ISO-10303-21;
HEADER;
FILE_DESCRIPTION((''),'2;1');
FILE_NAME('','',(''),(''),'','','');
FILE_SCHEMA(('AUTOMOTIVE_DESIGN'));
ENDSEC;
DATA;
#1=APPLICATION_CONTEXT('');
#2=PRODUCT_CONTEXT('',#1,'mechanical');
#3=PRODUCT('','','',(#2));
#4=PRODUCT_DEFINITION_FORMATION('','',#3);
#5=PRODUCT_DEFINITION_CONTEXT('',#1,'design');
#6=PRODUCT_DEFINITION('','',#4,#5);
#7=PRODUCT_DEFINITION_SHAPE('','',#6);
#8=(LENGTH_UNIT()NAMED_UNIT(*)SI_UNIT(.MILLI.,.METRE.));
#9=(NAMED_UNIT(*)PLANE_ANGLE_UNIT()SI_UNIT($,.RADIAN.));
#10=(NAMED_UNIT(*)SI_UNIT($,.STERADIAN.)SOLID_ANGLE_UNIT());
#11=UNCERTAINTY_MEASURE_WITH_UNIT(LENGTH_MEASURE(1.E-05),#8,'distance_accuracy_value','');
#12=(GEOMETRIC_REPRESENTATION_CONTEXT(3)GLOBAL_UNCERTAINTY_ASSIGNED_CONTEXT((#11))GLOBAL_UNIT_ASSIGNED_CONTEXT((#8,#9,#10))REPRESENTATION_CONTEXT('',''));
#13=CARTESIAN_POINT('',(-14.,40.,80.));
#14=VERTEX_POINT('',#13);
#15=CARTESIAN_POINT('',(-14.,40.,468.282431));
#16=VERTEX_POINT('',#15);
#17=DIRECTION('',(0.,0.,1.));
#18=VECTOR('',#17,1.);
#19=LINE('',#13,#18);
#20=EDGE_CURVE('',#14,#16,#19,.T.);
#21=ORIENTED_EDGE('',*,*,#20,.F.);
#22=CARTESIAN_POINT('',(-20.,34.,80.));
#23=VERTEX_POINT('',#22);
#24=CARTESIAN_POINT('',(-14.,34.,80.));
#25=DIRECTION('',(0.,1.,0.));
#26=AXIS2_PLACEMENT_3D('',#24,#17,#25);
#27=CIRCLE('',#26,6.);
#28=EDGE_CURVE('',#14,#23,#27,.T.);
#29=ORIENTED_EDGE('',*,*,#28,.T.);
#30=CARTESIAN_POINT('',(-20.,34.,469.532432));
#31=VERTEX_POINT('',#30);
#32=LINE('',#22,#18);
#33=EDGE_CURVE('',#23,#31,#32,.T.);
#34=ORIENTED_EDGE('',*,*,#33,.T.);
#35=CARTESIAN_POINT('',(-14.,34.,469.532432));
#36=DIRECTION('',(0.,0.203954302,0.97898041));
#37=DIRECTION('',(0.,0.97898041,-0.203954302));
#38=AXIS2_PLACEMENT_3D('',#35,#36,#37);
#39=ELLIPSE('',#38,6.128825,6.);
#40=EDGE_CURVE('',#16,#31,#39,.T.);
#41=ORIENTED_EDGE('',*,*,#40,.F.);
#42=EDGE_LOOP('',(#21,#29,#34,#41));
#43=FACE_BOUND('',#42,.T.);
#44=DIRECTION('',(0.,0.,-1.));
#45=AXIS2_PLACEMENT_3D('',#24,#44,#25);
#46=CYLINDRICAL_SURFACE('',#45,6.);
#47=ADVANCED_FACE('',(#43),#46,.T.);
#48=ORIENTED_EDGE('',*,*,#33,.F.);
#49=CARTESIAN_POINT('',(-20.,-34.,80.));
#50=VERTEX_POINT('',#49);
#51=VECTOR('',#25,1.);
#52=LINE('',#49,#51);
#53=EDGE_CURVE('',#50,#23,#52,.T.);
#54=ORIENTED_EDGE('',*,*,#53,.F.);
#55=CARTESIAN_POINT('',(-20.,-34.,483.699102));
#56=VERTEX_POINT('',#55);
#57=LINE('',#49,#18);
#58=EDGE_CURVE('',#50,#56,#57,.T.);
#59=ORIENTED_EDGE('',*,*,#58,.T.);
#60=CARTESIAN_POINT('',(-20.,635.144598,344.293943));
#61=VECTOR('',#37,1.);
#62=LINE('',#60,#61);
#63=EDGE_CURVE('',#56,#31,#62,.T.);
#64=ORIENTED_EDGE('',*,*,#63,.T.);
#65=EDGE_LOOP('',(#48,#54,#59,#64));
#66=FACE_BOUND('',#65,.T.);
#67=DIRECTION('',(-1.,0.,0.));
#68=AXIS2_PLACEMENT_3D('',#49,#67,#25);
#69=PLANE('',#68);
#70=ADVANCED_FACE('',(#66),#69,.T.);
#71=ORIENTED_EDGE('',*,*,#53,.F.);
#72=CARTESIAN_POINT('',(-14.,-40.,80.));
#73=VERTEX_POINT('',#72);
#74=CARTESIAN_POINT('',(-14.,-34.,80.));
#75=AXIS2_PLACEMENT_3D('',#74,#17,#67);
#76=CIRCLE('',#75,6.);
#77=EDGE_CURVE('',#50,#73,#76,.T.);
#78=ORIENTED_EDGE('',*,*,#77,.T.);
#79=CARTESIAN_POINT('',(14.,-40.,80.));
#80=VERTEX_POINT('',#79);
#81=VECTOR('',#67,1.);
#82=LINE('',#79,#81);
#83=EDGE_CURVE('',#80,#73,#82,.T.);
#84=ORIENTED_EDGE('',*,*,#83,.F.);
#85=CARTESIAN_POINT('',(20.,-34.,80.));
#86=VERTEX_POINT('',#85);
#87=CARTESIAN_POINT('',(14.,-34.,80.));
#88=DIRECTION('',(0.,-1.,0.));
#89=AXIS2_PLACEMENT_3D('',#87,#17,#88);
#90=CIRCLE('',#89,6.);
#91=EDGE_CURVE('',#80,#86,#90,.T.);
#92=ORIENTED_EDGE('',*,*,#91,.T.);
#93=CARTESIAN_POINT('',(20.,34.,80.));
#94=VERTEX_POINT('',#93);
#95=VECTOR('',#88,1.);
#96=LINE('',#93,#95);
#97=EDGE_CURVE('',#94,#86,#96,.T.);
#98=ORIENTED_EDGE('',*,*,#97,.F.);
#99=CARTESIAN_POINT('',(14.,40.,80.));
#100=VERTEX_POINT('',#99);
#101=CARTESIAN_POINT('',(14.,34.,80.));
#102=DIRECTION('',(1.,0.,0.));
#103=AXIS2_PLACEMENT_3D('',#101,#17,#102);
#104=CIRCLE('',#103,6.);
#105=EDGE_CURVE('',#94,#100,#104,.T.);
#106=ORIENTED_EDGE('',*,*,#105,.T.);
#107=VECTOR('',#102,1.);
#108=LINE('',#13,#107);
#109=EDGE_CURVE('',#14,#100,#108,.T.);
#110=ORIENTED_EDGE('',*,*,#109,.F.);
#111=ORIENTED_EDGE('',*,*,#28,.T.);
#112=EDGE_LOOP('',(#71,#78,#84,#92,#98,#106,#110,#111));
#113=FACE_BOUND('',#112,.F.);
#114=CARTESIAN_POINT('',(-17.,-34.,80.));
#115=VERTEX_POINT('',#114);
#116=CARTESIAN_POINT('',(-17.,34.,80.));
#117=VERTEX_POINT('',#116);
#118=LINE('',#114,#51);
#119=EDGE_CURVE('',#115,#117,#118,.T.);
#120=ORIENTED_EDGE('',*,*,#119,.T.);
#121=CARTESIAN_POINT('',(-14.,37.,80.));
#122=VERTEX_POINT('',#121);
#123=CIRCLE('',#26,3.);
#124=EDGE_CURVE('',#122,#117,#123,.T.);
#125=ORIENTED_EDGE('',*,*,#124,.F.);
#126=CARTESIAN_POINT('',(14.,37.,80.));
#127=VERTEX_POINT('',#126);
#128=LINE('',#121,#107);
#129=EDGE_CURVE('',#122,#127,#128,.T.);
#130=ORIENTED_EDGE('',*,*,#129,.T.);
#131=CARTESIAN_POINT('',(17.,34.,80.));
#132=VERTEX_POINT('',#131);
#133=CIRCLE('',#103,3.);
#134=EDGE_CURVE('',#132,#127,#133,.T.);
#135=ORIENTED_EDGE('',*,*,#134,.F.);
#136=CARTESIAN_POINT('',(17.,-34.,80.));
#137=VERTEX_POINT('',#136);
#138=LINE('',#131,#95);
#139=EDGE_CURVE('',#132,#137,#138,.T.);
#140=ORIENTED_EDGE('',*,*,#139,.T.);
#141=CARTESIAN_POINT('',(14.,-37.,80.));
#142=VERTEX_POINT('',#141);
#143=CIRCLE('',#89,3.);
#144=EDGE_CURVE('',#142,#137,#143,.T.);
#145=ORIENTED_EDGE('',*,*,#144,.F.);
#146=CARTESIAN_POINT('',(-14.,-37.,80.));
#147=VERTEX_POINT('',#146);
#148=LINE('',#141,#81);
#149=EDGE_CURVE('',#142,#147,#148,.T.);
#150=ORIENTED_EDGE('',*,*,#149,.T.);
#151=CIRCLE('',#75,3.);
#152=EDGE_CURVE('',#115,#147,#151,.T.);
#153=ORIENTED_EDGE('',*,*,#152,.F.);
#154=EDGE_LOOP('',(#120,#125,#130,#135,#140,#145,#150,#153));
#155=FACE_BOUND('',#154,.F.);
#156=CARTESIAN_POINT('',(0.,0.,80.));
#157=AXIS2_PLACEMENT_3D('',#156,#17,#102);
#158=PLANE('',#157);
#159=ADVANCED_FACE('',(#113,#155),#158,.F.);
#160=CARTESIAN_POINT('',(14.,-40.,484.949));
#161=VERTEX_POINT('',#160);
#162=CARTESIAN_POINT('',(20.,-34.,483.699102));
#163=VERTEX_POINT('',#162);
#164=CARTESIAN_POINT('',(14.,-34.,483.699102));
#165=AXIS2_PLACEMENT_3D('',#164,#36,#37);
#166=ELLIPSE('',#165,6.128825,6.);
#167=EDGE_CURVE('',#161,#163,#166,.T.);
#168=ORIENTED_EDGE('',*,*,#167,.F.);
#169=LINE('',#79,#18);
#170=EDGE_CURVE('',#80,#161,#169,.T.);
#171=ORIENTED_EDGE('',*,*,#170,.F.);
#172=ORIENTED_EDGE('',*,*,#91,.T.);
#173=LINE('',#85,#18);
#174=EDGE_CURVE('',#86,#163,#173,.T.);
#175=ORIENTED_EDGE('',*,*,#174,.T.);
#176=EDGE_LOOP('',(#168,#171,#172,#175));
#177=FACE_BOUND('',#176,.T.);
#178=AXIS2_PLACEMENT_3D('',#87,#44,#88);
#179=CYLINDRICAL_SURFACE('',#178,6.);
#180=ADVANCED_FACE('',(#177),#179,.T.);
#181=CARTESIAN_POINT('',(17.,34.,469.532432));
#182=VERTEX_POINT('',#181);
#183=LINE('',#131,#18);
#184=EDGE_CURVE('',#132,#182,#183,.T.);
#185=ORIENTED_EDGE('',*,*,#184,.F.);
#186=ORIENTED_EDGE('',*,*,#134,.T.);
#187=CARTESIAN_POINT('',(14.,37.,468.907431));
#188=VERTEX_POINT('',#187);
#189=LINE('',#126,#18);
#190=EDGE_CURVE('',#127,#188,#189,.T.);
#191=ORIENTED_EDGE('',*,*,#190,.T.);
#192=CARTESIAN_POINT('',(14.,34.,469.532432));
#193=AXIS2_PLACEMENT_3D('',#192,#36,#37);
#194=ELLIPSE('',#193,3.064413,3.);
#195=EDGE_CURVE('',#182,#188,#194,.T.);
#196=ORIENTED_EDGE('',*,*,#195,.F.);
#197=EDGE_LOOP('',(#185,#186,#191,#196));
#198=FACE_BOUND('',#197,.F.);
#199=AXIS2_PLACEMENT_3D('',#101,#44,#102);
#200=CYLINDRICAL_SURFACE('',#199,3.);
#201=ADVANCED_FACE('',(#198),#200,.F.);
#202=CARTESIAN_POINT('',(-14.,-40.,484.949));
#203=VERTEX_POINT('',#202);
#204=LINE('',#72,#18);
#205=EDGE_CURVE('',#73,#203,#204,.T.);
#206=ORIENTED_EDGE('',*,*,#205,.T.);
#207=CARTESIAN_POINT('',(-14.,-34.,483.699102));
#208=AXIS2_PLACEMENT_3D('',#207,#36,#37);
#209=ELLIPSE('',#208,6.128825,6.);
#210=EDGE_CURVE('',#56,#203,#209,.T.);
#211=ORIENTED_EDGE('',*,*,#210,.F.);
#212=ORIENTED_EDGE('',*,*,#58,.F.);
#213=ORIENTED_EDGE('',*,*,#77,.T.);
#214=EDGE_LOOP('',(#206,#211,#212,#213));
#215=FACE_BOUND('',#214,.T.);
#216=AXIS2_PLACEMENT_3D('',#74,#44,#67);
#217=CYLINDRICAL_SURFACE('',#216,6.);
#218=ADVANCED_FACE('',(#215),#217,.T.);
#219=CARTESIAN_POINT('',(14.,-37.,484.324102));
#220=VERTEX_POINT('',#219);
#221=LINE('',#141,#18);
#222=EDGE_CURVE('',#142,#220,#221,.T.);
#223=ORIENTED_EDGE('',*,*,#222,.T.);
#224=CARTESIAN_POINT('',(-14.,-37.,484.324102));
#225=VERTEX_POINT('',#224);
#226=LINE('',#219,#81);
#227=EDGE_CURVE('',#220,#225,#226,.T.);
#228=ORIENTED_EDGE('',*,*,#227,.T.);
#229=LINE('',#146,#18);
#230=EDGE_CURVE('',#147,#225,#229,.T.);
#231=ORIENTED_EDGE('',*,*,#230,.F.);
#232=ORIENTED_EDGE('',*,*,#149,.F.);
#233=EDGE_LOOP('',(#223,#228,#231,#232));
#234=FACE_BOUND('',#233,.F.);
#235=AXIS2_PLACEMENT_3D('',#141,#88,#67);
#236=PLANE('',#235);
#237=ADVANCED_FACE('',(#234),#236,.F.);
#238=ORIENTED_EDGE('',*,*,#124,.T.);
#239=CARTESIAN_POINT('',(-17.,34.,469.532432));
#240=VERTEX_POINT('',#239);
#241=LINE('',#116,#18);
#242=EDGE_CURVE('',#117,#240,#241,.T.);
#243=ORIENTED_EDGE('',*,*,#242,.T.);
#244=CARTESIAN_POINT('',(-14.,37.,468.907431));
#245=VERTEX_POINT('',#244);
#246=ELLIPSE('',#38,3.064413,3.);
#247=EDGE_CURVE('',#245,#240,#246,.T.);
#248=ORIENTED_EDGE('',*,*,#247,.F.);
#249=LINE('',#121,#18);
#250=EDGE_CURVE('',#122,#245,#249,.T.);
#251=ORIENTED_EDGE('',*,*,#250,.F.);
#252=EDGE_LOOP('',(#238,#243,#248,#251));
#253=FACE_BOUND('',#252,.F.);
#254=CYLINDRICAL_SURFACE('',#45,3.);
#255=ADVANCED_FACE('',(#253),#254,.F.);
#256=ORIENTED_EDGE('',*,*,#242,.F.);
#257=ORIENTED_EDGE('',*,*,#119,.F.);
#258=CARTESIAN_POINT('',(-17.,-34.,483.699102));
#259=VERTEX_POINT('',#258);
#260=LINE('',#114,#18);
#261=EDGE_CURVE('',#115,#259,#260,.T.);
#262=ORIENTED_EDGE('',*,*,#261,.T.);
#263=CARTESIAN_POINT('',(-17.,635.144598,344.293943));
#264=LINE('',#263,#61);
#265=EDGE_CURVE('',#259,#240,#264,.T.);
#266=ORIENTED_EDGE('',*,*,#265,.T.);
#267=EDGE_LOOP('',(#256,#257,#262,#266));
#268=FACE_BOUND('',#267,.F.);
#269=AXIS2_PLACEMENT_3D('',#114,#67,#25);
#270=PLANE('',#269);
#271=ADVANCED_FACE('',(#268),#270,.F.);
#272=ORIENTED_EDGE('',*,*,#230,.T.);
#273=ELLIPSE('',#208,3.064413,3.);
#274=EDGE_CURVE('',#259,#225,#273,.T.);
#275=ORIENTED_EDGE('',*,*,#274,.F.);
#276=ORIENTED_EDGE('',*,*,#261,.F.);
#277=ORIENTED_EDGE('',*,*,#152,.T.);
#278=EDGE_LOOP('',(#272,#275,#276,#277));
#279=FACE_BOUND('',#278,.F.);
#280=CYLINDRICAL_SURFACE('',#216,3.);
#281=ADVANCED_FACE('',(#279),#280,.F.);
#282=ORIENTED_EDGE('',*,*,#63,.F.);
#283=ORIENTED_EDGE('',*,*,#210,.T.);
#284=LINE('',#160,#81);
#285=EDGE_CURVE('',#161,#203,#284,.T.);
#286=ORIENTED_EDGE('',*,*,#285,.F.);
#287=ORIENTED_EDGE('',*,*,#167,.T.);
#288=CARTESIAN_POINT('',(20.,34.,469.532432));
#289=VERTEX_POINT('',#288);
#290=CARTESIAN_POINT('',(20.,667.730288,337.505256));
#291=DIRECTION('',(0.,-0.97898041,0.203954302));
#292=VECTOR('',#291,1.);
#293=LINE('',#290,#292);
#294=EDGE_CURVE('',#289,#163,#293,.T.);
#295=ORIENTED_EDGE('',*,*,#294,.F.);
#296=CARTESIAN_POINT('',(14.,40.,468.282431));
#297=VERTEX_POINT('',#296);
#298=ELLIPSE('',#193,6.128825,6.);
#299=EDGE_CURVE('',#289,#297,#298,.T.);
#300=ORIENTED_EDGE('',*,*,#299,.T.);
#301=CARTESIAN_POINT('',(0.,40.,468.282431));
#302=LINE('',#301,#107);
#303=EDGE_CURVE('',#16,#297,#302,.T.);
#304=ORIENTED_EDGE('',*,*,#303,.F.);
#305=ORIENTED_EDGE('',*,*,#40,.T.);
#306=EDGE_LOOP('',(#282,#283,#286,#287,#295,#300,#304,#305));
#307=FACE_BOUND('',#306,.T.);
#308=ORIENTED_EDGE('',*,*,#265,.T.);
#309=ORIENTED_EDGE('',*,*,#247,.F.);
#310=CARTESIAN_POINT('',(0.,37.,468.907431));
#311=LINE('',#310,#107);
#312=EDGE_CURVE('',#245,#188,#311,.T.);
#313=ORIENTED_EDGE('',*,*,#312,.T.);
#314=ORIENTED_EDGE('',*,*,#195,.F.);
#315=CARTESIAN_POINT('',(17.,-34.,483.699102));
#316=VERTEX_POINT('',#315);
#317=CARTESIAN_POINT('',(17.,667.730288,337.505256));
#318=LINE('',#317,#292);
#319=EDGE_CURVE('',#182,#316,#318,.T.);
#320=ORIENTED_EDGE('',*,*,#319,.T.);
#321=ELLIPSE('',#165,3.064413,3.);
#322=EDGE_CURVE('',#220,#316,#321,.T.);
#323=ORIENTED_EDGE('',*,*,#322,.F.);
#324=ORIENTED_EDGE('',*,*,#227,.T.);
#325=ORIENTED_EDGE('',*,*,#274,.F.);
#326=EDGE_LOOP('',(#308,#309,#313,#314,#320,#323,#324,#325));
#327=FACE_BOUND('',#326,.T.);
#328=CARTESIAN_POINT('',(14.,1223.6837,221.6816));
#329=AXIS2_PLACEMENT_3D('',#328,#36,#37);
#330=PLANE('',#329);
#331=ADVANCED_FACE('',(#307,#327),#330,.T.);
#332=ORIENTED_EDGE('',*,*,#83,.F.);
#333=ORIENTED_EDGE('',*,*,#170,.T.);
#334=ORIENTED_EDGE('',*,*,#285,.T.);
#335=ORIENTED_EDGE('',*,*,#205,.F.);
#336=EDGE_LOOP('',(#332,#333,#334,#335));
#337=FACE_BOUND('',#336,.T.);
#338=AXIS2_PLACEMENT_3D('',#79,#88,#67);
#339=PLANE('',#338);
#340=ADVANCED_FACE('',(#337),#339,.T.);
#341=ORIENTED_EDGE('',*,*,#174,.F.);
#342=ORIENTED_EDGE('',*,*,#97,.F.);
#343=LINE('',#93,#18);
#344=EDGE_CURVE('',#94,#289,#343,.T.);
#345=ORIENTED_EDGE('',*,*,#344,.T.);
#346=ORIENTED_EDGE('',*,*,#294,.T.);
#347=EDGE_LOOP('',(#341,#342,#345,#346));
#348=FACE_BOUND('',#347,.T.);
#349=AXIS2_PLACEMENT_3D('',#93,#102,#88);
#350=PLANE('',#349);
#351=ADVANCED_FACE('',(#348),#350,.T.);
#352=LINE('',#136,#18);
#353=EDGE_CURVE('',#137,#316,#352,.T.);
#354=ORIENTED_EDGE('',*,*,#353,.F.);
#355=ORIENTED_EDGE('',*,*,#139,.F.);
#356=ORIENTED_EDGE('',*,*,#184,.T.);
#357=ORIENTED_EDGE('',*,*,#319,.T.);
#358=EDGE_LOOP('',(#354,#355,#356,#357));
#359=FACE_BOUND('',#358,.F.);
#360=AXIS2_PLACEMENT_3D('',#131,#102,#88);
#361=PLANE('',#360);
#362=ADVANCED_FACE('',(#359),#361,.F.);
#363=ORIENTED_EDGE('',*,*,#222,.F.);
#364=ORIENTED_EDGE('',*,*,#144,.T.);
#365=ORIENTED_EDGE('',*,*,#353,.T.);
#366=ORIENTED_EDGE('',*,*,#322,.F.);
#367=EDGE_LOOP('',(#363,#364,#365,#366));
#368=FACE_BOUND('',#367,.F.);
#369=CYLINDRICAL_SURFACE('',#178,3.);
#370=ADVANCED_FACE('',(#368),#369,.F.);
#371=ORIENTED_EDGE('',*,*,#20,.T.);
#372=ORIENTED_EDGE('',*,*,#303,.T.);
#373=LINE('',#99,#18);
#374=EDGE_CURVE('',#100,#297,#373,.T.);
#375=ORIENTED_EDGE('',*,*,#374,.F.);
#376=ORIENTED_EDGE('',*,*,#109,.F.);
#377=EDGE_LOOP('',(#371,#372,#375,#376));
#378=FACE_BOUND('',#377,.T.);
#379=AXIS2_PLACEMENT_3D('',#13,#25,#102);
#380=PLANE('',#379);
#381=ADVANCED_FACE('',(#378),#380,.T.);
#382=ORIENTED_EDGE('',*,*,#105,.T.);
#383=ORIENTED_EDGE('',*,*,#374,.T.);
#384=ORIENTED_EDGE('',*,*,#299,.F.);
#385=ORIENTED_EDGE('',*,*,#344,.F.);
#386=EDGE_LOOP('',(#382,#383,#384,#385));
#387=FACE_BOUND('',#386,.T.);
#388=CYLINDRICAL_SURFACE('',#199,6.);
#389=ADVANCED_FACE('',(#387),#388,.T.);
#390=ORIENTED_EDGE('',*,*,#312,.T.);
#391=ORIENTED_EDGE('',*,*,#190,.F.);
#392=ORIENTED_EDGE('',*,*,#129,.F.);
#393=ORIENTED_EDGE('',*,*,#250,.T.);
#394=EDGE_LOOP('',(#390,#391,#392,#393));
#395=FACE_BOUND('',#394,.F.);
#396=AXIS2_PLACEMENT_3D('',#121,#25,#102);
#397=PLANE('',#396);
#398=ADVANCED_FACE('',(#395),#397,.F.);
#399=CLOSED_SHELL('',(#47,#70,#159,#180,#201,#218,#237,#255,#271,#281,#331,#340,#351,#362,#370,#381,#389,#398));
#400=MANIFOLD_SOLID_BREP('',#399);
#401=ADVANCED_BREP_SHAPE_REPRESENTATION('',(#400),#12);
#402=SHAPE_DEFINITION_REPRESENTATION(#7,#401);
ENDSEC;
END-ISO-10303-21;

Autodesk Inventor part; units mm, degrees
ref_plane "Start Plane" through (0, 0, 80) normal (0, 0, 1) x (1, 0, 0)
ref_plane "End Plane" through (0, 0, 484.949) normal (0, 0, 1) x (1, 0, 0)
sketch "Sketch" plane through (0, 0, 0) normal (0, 0, 1) x (1, 0, 0)
  line L0 (-20, -34) -> (-20, 34)
  line L1 (-14, 40) -> (14, 40)
  line L2 (20, 34) -> (20, -34)
  line L3 (14, -40) -> (-14, -40)
  arc A0 (-20, -34) -> (-14, -40) centre (-14, -34) ccw
  arc A1 (20, 34) -> (14, 40) centre (14, 34) ccw
  arc A2 (-14, 40) -> (-20, 34) centre (-14, 34) ccw
  arc A3 (14, -40) -> (20, -34) centre (14, -34) ccw
  arc A4 (-14, 37) -> (-17, 34) centre (-14, 34) ccw
  line L4 (-14, 37) -> (14, 37)
  arc A5 (17, 34) -> (14, 37) centre (14, 34) ccw
  line L5 (17, 34) -> (17, -34)
  arc A6 (14, -37) -> (17, -34) centre (14, -34) ccw
  line L6 (14, -37) -> (-14, -37)
  arc A7 (-17, -34) -> (-14, -37) centre (-14, -34) ccw
  line L7 (-17, -34) -> (-17, 34)
  line L8 (0, 57.7397) -> (0, -57.7397) construction
  line L9 (-29.7397, 0) -> (29.7397, 0) construction
  dimension "d7" = 6
  dimension "d9" = 40
  dimension "d11" = 80
  dimension "d12" = 3
  dimension "d15" = 20
  dimension "d16" = 40
extrude "Body" add sketch "Sketch" along normal up to surface (404.949 mm away) from surface at 80
sketch "Sketch3" plane through (0, 0, 0) normal (0, 0, 1) x (1, 0, 0)
  line L0 (0, 0) -> (10, 0)
ref_plane "Work Plane3" through (0, 0, 0) normal (0, -1, 0) x (1, 0, 0)
ref_plane "Work Plane4" through (14, 1223.6837, 221.6816) normal (0, 0.2039543, 0.9789804) x (1, 0, 0)
split "Split1" plane through (14, 1223.6837, 221.6816) removes the side toward (0, 0.2039543, 0.9789804)
sketch "Sketch4" plane through (0, 0, 0) normal (0, -1, 0) x (1, 0, 0)
  line L0 (-2, 80) -> (12, 80) projected
  line L1 (-2, 484.949) -> (12, 484.949) projected
  dimension "d18" = 404.949
equation "\"d7\" = G_IR"
equation "\"d9\" = G_W"
equation "\"d11\" = G_H"
equation "\"d12\" = G_T"
equation "\"d15\" = 0.5 * d9"
equation "\"d16\" = 0.5 * d11"
equation "\"d3\" = G_L"
equation "\"G_W\" = 40"
equation "\"G_H\" = 80"
equation "\"G_T\" = 3"
equation "\"G_IR\" = 6"
equation "\"G_L\" = d18"
equation "\"G_OFFSET_END\" = -65.051"
equation "\"d14\" = G_OFFSET_END + B_L"
equation "\"B_L\" = 550"
properties part number "ISO 10799-2 - 80x40x3 - 404.95" material "Steel, Mild"
